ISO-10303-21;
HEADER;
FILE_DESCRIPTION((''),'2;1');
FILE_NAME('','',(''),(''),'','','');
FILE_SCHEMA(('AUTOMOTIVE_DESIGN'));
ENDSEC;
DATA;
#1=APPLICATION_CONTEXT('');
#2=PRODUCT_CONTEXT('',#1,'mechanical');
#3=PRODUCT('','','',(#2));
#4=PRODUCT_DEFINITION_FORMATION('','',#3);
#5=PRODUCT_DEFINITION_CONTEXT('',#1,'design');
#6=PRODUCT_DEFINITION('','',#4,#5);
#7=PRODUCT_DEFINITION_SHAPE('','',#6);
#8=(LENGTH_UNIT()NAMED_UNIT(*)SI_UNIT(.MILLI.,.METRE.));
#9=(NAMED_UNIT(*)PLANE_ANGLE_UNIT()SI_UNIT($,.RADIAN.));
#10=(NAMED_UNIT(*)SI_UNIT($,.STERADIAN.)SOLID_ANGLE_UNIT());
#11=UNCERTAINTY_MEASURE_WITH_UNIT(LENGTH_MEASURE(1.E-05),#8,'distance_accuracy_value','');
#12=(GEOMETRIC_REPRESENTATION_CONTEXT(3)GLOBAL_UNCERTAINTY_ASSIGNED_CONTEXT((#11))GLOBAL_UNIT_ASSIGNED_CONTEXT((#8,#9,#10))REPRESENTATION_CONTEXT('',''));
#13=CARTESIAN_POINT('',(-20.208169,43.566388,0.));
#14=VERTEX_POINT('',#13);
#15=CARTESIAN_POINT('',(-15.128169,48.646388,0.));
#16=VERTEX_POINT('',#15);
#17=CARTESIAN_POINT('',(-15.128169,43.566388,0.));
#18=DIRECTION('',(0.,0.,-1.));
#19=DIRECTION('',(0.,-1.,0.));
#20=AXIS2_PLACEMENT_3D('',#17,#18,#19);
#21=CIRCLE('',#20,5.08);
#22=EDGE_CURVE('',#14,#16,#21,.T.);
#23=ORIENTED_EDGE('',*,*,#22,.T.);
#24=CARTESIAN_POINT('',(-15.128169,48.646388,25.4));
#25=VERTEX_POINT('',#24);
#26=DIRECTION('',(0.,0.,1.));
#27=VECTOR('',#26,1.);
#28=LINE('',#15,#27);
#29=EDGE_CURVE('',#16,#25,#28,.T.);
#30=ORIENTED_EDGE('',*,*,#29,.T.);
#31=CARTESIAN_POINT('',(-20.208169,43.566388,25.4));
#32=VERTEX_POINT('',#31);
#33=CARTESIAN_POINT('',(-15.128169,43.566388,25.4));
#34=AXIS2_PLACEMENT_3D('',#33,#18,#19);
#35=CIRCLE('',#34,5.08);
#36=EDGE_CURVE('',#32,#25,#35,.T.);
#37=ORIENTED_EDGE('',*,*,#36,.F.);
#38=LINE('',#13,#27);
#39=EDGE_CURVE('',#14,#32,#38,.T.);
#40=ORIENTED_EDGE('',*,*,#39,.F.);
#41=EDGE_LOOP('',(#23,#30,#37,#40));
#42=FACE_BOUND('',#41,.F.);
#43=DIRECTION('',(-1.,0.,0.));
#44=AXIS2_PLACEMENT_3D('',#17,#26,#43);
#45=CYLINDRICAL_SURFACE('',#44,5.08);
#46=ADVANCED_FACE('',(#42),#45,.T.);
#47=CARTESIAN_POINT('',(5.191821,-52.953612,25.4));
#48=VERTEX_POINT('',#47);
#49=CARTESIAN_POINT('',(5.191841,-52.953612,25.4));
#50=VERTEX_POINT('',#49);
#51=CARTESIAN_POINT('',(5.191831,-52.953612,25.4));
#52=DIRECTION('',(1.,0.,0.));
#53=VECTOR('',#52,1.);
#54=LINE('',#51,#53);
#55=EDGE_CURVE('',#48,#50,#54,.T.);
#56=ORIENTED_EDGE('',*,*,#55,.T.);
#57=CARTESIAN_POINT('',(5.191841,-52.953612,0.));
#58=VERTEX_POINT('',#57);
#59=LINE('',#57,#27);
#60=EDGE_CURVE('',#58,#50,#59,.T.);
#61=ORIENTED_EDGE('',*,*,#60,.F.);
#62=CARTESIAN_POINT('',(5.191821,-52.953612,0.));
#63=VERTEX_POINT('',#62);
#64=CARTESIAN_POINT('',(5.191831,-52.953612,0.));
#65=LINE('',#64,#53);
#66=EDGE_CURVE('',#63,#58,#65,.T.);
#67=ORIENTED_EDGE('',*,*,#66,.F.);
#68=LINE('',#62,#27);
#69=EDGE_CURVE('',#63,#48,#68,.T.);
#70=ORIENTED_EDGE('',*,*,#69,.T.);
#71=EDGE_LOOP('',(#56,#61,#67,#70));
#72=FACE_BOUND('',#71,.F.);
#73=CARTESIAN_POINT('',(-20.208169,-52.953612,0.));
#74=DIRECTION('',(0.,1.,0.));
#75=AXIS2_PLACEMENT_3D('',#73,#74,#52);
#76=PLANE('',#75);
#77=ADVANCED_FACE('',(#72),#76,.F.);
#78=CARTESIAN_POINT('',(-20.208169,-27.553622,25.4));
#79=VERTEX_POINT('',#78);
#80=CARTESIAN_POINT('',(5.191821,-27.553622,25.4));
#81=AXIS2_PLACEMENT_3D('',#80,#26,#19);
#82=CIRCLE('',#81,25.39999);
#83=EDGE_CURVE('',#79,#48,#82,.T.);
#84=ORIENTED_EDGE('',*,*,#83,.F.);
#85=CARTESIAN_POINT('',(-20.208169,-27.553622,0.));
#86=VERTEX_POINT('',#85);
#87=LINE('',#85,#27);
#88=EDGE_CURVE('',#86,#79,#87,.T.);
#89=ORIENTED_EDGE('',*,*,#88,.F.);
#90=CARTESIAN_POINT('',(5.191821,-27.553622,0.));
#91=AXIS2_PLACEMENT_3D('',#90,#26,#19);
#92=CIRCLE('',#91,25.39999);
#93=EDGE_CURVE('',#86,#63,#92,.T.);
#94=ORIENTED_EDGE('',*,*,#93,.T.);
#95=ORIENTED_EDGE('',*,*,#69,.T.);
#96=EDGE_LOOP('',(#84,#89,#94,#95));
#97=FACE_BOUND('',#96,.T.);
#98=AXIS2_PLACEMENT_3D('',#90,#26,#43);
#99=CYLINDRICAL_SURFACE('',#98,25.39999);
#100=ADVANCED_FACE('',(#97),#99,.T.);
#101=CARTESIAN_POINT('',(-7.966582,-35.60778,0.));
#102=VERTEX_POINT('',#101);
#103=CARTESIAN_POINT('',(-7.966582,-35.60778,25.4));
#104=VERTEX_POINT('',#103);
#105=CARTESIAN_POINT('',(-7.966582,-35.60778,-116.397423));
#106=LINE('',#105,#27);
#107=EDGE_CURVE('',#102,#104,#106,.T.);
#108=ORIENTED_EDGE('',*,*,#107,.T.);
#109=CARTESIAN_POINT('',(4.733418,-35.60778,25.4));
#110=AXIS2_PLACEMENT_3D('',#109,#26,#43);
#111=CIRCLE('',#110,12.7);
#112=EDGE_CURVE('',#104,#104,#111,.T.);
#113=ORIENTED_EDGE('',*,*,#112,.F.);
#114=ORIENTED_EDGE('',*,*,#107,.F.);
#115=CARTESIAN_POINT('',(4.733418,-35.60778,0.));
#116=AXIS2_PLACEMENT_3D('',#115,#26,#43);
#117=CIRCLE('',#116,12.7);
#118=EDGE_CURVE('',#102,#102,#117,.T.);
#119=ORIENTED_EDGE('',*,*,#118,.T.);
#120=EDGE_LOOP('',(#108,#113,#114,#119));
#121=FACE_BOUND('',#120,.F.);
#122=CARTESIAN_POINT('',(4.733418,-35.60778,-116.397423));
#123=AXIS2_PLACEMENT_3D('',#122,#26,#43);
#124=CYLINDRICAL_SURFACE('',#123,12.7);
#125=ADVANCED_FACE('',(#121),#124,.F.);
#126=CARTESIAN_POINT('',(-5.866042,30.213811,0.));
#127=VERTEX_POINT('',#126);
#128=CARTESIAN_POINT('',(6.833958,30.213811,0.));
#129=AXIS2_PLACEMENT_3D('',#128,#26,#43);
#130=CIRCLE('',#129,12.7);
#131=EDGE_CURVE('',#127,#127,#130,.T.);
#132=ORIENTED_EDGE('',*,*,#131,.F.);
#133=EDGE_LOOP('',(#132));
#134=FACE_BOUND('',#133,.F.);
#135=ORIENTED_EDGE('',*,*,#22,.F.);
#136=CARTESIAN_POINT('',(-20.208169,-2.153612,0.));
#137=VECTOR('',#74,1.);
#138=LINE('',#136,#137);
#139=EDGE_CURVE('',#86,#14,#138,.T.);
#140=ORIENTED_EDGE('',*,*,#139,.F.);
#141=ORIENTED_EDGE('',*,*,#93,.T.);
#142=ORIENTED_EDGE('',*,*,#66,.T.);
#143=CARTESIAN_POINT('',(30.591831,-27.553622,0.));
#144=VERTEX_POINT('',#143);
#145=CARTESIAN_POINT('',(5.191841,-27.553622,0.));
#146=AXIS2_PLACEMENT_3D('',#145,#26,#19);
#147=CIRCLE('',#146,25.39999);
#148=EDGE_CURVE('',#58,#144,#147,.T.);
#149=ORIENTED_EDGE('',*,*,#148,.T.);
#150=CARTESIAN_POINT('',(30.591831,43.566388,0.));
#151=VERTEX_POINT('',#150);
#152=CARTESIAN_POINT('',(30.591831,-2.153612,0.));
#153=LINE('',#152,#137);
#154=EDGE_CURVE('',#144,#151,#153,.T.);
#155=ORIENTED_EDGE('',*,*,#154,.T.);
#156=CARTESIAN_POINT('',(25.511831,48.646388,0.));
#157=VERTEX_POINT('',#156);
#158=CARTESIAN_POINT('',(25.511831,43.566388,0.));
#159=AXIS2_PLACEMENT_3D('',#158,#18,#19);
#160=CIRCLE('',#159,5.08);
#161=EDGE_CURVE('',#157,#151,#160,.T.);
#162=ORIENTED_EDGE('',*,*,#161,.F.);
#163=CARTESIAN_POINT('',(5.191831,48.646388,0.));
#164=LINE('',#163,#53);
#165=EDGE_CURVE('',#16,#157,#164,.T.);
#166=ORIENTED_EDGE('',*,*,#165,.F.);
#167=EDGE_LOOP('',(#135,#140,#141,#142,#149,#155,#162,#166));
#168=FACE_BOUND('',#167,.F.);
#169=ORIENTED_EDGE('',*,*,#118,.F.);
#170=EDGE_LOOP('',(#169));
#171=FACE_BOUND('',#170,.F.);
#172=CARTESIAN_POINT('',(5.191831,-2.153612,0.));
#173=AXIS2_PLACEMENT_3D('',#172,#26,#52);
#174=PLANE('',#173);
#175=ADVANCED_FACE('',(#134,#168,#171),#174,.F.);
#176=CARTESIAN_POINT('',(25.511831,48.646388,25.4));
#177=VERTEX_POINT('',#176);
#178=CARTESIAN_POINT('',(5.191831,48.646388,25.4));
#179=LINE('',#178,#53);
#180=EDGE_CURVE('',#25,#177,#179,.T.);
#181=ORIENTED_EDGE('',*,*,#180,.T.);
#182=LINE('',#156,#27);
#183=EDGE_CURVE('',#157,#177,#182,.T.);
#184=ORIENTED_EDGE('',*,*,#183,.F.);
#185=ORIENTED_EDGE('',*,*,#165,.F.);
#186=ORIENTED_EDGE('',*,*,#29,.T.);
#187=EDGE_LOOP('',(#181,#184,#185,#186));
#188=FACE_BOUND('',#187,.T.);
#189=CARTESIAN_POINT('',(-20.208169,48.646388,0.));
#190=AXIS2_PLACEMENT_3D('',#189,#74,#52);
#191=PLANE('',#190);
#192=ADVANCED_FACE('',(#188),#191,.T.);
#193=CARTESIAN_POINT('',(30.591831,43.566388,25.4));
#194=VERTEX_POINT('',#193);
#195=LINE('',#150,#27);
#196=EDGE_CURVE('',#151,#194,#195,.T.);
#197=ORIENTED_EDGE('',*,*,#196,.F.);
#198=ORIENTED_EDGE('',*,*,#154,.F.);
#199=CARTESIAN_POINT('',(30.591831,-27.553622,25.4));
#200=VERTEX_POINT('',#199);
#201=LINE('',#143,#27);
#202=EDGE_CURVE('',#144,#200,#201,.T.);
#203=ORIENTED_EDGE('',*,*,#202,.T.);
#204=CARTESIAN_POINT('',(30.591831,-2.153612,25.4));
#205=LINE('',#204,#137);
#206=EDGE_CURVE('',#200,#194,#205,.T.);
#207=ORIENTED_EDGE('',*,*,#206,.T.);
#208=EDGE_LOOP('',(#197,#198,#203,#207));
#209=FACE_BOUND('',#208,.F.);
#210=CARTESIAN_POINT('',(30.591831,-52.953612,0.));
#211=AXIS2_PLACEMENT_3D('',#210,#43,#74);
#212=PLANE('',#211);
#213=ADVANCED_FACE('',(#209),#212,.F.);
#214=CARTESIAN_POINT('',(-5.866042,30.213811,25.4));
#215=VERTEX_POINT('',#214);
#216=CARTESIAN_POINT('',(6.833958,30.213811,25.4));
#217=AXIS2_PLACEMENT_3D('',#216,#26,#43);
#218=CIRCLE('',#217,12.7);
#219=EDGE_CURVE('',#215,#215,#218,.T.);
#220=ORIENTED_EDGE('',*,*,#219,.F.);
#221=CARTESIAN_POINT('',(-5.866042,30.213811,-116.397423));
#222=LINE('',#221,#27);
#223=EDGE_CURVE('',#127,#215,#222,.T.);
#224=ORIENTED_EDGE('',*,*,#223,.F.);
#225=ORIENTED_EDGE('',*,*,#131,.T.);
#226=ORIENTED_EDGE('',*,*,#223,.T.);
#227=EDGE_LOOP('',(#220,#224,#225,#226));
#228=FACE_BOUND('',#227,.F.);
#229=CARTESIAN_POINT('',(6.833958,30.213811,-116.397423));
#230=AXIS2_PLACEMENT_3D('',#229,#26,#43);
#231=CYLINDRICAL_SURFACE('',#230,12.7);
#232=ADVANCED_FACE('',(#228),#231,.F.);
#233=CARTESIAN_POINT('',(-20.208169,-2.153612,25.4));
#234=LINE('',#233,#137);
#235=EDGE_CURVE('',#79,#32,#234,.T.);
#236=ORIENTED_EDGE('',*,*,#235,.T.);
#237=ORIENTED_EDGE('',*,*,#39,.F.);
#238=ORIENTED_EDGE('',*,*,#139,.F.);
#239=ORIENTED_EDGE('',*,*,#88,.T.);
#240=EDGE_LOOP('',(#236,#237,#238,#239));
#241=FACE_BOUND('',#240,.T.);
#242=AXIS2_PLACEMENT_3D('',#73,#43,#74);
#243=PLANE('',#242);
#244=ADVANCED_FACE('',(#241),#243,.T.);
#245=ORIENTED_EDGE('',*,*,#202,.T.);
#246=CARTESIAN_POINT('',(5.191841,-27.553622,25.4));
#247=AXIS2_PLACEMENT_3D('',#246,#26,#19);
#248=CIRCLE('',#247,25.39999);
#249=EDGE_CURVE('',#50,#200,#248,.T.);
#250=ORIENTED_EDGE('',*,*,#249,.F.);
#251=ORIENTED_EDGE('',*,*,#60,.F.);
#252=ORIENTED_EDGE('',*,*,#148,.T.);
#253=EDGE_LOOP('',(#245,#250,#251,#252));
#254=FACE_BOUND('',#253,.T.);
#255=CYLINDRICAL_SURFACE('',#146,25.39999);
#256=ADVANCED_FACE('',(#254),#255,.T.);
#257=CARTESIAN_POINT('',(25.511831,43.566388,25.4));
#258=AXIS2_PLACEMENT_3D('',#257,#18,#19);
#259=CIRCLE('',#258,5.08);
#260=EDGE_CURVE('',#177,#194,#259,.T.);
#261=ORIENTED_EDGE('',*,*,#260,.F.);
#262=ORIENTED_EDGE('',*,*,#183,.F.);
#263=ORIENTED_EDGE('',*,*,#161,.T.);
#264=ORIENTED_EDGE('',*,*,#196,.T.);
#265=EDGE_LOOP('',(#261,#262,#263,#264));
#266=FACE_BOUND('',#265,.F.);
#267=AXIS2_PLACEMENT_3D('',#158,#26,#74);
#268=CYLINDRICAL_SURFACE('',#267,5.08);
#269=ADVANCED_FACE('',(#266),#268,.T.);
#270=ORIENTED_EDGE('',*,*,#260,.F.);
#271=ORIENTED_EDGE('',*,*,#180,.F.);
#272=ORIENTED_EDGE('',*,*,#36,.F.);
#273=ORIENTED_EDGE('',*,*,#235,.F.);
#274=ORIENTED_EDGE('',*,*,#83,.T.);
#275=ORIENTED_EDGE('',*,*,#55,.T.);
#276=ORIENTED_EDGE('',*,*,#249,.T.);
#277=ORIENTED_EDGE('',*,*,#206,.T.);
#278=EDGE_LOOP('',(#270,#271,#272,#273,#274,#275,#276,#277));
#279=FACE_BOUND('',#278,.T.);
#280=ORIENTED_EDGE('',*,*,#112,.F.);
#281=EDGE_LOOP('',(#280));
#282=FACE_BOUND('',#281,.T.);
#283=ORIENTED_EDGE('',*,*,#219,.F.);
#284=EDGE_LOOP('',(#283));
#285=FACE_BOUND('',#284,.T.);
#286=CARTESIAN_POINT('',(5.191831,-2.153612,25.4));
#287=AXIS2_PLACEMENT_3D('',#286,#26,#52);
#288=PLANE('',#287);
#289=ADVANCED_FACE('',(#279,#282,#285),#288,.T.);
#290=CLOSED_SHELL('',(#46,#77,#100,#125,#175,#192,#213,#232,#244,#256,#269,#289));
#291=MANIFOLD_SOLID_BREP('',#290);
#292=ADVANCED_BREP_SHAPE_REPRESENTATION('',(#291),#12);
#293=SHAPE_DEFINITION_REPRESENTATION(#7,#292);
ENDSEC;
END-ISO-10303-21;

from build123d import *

# Parameters (mm, degrees)
F0_W     = 50.8
F0_H     = 101.6
F1_DEPTH = 25.4
F2_R     = 12.7
F3_DEPTH = 131
F4_D     = 25.4
F6_D     = 25.4
F7_R     = 25.39999
F8_R     = 5.08


# Not quite as in the source:
# - a fillet or chamfer is up to 0.001 mm smaller than in the source, because OpenCascade refuses the exact size
# - an extrude ends at something that could not be found from the text; its depth is read off the source's solid


with BuildPart() as f1:
    # F0 (on Top) → F1 (new body)
    with BuildSketch(Plane.XY):
        with Locations((5.1918309937, -2.1536122621)):
            Rectangle(F0_W, F0_H)
    extrude(amount=F1_DEPTH)

    # F2 (on Top) → F3 (cut, through all)
    with BuildSketch(Plane.XY):
        with Locations((4.7334181145, -35.6077803201)):
            Circle(F2_R)
    extrude(amount=-F3_DEPTH, mode=Mode.SUBTRACT)

    # F4 (through all)
    with Locations(Plane(origin=(0, 0, 0), x_dir=(1, 0, 0), z_dir=(0, 0, -1))):
        with Locations((4.7334181145, 35.6077803201)):
            Hole(F4_D / 2)

    # F6 (through all)
    with Locations(Plane(origin=(0, 0, 0), x_dir=(1, 0, 0), z_dir=(0, 0, -1))):
        with Locations((6.8339584395, -30.2138105035)):
            Hole(F6_D / 2)

    # F7 (radius 25.4 in the source; OpenCascade refuses exactly that, so slightly less here)
    f7_edges = [f1.edges().sort_by_distance(p)[0] for p in [
        (-20.208169, -52.953612, 12.7),
        (30.591831, -52.953612, 12.7),
    ]]
    fillet(f7_edges, radius=F7_R)

    # F8
    f8_edges = [f1.edges().sort_by_distance(p)[0] for p in [
        (-20.208169, 48.646388, 12.7),
        (30.591831, 48.646388, 12.7),
    ]]
    fillet(f8_edges, radius=F8_R)


solid = f1.part
